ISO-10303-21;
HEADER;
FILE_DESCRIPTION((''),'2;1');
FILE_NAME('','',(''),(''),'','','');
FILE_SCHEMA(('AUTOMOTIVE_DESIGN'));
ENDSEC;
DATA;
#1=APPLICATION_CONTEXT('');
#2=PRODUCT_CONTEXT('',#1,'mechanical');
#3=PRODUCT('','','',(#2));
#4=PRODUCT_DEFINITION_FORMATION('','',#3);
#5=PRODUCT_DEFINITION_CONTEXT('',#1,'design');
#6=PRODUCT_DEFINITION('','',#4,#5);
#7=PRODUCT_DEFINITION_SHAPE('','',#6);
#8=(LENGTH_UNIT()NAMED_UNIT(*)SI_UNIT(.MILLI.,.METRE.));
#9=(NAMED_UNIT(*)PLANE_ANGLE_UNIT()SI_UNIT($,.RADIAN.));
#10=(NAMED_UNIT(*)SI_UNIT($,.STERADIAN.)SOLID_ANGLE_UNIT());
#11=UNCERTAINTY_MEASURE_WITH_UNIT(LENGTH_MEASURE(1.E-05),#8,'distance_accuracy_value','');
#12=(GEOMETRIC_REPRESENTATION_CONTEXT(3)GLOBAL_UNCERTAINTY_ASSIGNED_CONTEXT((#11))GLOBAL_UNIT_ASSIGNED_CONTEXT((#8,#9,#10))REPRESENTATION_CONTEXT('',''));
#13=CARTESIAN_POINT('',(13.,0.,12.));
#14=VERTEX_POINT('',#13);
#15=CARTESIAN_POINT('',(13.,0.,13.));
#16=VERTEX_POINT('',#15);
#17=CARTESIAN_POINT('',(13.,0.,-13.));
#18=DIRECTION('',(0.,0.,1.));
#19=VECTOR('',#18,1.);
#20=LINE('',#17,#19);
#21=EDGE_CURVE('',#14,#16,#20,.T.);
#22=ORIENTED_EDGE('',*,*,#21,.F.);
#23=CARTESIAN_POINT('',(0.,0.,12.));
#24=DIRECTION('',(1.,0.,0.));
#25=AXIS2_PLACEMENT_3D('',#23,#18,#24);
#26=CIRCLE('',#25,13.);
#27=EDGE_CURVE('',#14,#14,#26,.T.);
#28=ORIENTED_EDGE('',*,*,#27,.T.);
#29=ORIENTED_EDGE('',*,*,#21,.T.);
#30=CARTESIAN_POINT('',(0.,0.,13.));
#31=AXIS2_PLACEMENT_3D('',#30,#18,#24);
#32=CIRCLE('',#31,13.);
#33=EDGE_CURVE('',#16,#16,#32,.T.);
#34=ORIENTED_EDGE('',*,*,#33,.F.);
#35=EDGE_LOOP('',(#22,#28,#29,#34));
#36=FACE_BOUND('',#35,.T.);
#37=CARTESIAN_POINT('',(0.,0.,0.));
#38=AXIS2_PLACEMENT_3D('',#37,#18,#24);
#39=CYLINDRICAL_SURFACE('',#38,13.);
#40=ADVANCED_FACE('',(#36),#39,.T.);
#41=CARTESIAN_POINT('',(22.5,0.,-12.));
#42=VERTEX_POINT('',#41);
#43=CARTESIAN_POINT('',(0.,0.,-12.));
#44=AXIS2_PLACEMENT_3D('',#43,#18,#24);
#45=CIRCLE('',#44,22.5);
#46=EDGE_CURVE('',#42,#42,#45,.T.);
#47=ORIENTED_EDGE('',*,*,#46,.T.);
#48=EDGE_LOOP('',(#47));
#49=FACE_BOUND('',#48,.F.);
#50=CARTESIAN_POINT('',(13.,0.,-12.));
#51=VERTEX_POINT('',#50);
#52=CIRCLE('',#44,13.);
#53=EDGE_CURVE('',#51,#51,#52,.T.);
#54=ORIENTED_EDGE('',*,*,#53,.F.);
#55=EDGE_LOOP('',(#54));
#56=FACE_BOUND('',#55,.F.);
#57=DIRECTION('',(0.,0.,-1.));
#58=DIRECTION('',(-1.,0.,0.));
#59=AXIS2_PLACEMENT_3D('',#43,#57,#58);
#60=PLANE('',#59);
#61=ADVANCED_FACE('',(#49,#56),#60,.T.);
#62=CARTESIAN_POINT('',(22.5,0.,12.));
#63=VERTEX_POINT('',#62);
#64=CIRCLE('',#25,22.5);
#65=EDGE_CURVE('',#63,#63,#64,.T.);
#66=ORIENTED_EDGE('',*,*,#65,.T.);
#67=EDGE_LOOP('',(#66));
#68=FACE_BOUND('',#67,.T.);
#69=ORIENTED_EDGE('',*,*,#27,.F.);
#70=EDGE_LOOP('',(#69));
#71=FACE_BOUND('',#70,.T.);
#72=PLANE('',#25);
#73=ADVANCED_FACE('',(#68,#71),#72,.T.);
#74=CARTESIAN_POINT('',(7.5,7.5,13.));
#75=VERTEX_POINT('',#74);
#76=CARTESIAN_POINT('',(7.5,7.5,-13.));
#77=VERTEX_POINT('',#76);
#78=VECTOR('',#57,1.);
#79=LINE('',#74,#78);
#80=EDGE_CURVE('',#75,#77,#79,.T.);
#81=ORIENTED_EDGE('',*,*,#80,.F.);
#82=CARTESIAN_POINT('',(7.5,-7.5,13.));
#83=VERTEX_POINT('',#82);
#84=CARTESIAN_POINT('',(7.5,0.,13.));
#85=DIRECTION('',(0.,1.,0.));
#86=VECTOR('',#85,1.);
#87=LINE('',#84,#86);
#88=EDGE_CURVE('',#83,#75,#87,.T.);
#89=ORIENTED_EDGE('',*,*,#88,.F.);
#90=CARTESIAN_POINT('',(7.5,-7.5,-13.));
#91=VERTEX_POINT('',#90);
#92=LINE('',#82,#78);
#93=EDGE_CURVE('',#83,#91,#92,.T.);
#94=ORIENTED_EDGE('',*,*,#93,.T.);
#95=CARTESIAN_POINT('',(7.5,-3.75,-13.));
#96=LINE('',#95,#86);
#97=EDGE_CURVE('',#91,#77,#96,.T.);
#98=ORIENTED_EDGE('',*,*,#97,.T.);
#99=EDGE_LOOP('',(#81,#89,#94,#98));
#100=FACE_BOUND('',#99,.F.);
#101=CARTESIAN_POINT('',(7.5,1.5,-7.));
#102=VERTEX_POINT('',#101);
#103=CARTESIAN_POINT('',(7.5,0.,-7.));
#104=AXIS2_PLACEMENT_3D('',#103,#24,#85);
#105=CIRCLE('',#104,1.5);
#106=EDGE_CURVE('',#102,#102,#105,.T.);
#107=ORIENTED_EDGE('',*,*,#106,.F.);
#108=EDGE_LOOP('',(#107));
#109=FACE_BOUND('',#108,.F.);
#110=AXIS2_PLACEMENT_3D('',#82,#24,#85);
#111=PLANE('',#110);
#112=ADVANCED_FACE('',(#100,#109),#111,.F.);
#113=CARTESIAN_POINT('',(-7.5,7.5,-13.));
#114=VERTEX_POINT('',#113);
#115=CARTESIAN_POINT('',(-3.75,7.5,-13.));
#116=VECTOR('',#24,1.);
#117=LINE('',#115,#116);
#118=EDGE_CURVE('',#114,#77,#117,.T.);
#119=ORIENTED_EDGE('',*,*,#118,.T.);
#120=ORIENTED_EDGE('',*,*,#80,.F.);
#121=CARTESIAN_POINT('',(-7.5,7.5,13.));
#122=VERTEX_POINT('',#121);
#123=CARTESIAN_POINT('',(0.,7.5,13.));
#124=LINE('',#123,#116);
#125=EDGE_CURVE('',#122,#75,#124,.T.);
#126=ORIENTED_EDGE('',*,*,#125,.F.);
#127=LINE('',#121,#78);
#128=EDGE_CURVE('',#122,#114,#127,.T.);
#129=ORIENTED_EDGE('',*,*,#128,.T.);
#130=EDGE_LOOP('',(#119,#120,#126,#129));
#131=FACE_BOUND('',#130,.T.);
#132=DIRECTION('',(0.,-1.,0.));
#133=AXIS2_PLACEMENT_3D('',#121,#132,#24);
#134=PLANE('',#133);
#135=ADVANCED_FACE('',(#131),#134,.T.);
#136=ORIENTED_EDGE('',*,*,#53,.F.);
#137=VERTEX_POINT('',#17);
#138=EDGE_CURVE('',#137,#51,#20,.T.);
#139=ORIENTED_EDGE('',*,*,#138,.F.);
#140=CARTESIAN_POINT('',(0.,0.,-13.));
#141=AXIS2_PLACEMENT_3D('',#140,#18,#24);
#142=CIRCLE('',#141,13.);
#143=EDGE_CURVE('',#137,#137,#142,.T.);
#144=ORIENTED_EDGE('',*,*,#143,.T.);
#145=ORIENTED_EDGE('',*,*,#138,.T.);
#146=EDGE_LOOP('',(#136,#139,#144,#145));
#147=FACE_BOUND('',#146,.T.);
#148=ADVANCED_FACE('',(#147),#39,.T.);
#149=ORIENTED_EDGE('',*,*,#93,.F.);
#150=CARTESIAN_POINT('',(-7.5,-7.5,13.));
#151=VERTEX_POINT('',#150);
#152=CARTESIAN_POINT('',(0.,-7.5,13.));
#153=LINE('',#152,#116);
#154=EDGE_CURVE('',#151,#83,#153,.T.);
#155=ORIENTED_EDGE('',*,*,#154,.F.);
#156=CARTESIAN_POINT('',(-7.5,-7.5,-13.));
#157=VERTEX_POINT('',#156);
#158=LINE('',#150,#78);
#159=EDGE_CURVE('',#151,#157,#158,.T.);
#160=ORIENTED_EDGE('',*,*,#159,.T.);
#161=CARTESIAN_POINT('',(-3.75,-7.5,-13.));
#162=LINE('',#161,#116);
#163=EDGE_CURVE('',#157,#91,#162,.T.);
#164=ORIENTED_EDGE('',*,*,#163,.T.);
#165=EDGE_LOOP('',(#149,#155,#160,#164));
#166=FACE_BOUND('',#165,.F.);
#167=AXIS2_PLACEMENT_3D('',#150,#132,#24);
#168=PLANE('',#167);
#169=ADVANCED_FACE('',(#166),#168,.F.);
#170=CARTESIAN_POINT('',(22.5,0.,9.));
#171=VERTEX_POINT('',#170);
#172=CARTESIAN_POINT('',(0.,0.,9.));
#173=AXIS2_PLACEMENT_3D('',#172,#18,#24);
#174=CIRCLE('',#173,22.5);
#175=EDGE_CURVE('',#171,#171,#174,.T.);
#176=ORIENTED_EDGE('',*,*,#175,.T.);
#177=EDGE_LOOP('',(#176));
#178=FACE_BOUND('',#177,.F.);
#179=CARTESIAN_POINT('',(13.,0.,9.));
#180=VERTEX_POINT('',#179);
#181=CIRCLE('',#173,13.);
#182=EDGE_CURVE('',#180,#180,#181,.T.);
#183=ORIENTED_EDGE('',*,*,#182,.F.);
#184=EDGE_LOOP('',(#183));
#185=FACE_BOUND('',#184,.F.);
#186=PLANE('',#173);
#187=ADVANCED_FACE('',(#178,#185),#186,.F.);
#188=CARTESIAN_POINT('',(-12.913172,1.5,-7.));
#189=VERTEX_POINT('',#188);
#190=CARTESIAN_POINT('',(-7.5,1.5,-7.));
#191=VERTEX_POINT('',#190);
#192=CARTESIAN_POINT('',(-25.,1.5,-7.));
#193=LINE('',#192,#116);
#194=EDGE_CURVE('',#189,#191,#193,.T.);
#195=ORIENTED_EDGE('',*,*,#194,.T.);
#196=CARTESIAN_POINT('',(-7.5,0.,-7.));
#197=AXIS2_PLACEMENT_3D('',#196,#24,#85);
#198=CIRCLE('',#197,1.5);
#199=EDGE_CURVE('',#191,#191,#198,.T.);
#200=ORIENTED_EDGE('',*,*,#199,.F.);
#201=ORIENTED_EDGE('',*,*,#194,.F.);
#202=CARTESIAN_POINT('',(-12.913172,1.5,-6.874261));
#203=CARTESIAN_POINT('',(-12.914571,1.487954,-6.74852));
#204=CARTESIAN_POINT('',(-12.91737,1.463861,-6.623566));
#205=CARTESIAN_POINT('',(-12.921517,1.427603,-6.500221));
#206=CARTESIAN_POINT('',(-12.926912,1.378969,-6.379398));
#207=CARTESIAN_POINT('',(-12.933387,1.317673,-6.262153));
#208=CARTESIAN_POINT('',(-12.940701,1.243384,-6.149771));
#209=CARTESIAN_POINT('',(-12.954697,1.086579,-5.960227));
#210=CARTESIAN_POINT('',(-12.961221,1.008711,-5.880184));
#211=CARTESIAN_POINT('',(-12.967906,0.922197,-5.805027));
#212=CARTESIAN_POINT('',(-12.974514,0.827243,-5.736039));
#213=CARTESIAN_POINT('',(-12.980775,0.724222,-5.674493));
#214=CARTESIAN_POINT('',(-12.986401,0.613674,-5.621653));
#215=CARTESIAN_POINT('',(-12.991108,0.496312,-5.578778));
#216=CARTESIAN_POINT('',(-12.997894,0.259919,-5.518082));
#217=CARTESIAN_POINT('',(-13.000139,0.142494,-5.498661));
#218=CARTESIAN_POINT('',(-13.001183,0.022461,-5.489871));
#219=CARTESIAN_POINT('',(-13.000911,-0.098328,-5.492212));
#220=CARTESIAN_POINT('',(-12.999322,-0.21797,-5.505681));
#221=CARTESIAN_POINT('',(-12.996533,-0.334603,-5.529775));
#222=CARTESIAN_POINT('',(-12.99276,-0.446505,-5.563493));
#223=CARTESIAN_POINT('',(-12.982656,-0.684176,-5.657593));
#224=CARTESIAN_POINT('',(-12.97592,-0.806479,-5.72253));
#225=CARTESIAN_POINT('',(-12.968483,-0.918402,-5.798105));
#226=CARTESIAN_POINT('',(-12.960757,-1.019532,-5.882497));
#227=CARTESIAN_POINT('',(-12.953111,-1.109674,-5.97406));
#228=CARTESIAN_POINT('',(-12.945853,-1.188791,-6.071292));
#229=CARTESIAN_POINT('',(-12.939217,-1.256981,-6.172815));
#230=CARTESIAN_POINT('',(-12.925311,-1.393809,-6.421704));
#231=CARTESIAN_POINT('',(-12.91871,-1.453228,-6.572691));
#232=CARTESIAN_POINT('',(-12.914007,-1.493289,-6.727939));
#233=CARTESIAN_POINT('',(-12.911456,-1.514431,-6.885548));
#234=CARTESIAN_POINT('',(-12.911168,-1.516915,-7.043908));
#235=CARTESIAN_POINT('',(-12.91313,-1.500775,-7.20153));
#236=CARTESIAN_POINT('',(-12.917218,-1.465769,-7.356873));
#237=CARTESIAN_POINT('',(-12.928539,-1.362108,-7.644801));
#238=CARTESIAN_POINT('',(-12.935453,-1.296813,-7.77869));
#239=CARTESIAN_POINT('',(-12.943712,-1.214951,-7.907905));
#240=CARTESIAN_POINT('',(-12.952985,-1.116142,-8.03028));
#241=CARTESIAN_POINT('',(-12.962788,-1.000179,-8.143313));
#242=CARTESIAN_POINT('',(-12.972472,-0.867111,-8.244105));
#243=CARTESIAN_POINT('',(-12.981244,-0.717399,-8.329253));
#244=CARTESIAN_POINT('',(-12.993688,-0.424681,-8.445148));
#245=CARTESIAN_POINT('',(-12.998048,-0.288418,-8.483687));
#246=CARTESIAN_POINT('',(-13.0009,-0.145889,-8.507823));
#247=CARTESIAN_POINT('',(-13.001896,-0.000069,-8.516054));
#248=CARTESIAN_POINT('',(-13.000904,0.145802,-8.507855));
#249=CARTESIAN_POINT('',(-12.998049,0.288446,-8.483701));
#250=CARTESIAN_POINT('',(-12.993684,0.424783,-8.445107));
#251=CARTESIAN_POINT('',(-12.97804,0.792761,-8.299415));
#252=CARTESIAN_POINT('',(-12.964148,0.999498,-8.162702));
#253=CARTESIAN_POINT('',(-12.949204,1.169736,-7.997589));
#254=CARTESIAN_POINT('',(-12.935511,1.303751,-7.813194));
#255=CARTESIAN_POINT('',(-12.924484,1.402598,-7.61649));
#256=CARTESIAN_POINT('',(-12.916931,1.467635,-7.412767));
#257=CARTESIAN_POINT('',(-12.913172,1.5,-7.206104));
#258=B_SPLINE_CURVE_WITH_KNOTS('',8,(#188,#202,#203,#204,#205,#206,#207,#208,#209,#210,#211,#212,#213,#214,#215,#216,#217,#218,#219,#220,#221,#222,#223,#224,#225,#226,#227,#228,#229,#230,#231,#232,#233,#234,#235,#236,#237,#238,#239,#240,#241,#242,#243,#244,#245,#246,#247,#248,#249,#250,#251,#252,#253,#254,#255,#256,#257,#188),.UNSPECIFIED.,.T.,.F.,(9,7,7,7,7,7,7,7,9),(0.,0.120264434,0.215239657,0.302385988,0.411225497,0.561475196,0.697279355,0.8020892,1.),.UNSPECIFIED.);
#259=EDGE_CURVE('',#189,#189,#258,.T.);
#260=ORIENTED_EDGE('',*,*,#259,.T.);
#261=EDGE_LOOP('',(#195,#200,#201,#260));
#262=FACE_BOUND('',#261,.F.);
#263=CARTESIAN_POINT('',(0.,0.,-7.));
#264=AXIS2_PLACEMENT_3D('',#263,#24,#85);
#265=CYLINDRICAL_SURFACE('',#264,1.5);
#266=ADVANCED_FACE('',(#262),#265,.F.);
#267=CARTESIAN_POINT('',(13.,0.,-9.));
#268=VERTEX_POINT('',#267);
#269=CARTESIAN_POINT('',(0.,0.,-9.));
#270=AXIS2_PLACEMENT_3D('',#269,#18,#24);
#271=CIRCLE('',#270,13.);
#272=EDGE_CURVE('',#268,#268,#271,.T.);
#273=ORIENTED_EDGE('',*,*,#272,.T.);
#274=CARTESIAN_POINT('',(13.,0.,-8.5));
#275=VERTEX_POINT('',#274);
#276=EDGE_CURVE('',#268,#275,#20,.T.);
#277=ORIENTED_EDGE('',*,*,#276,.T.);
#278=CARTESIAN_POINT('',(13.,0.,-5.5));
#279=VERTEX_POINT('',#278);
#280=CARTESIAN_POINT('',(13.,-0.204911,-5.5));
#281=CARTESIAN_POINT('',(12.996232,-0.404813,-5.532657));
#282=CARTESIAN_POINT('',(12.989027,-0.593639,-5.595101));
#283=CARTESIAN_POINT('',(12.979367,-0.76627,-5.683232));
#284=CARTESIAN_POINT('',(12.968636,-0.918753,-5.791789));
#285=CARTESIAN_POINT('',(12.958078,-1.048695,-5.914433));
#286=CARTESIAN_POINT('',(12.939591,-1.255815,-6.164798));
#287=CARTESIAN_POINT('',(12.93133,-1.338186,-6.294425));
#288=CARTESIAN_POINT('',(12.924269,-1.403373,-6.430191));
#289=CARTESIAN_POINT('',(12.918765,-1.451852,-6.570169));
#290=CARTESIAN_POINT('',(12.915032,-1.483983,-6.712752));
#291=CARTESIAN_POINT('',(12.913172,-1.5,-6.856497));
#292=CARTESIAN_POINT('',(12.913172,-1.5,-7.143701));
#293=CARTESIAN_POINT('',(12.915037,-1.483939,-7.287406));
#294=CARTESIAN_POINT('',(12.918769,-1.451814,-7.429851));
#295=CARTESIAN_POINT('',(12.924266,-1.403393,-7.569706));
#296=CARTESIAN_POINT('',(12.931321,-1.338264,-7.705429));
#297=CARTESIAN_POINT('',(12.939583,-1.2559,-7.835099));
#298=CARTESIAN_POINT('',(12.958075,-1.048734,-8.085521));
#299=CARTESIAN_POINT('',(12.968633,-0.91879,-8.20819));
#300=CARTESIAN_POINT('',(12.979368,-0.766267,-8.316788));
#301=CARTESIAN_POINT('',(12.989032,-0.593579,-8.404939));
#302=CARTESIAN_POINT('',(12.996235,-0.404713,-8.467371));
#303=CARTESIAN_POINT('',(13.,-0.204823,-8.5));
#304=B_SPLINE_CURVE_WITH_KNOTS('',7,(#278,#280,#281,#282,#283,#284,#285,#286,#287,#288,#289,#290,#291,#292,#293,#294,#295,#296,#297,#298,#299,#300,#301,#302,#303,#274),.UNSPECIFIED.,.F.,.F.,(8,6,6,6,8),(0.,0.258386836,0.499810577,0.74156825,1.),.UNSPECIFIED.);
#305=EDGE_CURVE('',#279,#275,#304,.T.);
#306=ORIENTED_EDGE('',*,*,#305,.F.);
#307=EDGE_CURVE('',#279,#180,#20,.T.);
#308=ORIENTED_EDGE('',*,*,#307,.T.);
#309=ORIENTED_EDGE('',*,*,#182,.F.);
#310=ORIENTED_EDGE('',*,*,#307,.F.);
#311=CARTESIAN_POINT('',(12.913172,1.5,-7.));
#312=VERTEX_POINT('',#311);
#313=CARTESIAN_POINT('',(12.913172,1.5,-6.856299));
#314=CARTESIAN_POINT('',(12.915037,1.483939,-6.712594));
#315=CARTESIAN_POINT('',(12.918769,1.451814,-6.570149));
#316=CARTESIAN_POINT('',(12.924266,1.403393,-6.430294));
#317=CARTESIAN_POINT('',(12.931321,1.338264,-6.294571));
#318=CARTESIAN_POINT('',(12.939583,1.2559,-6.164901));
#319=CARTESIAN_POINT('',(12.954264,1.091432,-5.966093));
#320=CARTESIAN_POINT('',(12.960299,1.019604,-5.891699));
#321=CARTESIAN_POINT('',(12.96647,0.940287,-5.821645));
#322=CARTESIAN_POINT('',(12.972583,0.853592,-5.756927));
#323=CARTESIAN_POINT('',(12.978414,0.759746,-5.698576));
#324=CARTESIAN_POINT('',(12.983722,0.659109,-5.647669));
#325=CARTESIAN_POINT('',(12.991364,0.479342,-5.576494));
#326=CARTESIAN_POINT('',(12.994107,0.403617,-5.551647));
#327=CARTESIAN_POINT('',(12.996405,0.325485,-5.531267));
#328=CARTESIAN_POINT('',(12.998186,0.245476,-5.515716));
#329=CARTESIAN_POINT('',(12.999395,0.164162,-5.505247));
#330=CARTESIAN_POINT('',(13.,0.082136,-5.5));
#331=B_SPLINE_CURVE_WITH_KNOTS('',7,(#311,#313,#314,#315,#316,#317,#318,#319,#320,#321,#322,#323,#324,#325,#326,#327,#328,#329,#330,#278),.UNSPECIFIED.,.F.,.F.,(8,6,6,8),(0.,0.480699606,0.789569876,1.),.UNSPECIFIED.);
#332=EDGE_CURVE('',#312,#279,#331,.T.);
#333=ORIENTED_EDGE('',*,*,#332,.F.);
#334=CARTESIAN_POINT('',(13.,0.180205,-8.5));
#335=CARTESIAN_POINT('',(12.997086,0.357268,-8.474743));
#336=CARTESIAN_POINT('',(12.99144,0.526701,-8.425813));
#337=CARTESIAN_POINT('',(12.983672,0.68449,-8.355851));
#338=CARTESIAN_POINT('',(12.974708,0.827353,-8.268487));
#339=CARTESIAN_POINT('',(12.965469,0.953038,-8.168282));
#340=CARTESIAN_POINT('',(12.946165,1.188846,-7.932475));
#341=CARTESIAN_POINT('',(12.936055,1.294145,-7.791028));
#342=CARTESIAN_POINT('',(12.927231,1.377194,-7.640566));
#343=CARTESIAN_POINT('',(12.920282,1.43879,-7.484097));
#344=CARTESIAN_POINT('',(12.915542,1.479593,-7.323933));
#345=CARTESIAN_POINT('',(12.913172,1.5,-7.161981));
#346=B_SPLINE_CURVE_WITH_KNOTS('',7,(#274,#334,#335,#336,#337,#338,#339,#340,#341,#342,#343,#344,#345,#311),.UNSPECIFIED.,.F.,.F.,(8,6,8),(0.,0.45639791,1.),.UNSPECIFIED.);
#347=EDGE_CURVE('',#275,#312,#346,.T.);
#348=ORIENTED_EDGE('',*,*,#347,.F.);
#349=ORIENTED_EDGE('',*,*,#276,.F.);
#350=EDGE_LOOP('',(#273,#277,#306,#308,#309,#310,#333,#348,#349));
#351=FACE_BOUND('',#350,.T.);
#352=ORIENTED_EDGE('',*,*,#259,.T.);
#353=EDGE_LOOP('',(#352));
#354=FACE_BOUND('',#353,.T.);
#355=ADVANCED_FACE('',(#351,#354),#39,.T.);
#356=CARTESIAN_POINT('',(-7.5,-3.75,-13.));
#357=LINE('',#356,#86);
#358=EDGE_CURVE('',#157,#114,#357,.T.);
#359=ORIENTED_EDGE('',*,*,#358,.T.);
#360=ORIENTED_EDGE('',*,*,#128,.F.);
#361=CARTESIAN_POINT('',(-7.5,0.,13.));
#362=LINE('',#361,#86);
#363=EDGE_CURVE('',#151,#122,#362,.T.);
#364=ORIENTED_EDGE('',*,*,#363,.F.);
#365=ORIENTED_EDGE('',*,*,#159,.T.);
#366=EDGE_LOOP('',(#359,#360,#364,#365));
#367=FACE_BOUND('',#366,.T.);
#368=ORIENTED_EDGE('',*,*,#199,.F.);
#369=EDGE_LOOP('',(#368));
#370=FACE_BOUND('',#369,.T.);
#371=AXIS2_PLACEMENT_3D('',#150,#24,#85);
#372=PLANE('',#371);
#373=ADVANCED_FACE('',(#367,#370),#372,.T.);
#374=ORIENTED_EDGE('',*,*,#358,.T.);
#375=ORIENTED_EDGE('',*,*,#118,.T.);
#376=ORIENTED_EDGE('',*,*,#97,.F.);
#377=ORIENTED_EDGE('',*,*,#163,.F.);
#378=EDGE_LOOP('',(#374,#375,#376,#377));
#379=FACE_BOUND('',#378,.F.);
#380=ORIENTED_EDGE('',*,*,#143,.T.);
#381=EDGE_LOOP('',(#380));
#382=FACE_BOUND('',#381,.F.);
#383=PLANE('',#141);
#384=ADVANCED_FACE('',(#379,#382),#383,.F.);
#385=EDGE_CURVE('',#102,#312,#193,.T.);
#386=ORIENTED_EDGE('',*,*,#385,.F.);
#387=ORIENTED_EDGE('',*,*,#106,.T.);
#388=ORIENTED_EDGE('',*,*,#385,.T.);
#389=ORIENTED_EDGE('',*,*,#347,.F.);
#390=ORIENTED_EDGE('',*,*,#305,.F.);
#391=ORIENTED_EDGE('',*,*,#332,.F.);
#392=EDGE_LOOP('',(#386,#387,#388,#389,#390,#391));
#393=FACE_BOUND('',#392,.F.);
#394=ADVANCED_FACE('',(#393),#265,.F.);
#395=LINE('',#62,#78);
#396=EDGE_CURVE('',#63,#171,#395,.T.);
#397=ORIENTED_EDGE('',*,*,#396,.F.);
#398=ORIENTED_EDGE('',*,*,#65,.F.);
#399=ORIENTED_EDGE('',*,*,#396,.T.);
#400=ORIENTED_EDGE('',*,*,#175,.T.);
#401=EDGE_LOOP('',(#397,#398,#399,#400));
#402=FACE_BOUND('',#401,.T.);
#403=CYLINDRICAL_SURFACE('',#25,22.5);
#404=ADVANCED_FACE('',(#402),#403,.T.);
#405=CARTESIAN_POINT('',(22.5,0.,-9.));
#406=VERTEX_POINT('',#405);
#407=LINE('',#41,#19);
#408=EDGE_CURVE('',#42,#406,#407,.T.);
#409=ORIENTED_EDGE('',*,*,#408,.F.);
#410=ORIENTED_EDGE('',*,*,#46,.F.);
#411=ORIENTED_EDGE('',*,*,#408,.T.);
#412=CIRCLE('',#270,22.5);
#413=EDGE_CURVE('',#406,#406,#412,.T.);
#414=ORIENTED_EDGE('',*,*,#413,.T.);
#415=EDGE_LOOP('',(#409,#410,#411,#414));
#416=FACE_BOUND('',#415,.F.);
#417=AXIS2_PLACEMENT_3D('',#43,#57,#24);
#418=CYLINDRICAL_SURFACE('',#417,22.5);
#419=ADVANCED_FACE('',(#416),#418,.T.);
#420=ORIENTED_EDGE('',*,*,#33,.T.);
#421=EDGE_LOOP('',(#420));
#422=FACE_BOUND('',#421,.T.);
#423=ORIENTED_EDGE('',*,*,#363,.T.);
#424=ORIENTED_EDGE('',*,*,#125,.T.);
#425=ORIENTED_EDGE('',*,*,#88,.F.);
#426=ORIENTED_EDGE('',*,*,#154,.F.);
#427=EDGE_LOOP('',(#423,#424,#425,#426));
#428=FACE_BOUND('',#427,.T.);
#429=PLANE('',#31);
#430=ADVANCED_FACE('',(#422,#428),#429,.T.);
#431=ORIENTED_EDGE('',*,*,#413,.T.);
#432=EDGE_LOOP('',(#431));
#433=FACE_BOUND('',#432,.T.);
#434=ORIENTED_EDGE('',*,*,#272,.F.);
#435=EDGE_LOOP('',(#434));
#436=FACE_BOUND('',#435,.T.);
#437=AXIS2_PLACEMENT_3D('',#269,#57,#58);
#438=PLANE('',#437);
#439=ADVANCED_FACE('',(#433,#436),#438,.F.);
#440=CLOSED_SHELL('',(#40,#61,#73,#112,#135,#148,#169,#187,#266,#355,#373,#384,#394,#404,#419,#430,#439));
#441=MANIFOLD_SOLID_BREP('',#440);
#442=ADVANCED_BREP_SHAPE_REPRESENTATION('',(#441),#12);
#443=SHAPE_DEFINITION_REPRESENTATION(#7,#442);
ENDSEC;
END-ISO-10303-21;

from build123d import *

# Parameters (mm, degrees)
F0_R     = 13
F1_DEPTH = 13
F3_R     = 22.5
F4_DEPTH = 3
F5_W     = 15
F5_H     = 15
F6_DEPTH = 58.6
F7_R     = 1.5
F8_DEPTH = 25


# Not quite as in the source:
# - a pattern or mirror of a feature is missing from the dataset's text; its kind, count and spacing are read off the source's solid


with BuildPart() as f1:
    # F0 (on Top) → F1 (new body, symmetric)
    with BuildSketch(Plane.XY):
        Circle(F0_R)
    extrude(amount=F1_DEPTH, both=True)

    # F3 (on offset) → F4 (join)
    with BuildSketch(Plane.XY.offset(12)):
        Circle(F3_R)
    f4 = extrude(amount=-F4_DEPTH)

    # F4_copies: F4 across plane
    add(f4.mirror(Plane(origin=(0, 0, 0), x_dir=(-1, 0, 0), z_dir=(0, 0, -1))))

    # F5 (on face) → F6 (cut)
    with BuildSketch(Plane.XY.offset(13)):
        Rectangle(F5_W, F5_H)
    extrude(amount=-F6_DEPTH, mode=Mode.SUBTRACT)

    # F7 (on Right) → F8 (cut, symmetric)
    with BuildSketch(Plane.YZ):
        with Locations((0, -7)):
            Circle(F7_R)
    extrude(amount=F8_DEPTH, both=True, mode=Mode.SUBTRACT)


solid = f1.part
